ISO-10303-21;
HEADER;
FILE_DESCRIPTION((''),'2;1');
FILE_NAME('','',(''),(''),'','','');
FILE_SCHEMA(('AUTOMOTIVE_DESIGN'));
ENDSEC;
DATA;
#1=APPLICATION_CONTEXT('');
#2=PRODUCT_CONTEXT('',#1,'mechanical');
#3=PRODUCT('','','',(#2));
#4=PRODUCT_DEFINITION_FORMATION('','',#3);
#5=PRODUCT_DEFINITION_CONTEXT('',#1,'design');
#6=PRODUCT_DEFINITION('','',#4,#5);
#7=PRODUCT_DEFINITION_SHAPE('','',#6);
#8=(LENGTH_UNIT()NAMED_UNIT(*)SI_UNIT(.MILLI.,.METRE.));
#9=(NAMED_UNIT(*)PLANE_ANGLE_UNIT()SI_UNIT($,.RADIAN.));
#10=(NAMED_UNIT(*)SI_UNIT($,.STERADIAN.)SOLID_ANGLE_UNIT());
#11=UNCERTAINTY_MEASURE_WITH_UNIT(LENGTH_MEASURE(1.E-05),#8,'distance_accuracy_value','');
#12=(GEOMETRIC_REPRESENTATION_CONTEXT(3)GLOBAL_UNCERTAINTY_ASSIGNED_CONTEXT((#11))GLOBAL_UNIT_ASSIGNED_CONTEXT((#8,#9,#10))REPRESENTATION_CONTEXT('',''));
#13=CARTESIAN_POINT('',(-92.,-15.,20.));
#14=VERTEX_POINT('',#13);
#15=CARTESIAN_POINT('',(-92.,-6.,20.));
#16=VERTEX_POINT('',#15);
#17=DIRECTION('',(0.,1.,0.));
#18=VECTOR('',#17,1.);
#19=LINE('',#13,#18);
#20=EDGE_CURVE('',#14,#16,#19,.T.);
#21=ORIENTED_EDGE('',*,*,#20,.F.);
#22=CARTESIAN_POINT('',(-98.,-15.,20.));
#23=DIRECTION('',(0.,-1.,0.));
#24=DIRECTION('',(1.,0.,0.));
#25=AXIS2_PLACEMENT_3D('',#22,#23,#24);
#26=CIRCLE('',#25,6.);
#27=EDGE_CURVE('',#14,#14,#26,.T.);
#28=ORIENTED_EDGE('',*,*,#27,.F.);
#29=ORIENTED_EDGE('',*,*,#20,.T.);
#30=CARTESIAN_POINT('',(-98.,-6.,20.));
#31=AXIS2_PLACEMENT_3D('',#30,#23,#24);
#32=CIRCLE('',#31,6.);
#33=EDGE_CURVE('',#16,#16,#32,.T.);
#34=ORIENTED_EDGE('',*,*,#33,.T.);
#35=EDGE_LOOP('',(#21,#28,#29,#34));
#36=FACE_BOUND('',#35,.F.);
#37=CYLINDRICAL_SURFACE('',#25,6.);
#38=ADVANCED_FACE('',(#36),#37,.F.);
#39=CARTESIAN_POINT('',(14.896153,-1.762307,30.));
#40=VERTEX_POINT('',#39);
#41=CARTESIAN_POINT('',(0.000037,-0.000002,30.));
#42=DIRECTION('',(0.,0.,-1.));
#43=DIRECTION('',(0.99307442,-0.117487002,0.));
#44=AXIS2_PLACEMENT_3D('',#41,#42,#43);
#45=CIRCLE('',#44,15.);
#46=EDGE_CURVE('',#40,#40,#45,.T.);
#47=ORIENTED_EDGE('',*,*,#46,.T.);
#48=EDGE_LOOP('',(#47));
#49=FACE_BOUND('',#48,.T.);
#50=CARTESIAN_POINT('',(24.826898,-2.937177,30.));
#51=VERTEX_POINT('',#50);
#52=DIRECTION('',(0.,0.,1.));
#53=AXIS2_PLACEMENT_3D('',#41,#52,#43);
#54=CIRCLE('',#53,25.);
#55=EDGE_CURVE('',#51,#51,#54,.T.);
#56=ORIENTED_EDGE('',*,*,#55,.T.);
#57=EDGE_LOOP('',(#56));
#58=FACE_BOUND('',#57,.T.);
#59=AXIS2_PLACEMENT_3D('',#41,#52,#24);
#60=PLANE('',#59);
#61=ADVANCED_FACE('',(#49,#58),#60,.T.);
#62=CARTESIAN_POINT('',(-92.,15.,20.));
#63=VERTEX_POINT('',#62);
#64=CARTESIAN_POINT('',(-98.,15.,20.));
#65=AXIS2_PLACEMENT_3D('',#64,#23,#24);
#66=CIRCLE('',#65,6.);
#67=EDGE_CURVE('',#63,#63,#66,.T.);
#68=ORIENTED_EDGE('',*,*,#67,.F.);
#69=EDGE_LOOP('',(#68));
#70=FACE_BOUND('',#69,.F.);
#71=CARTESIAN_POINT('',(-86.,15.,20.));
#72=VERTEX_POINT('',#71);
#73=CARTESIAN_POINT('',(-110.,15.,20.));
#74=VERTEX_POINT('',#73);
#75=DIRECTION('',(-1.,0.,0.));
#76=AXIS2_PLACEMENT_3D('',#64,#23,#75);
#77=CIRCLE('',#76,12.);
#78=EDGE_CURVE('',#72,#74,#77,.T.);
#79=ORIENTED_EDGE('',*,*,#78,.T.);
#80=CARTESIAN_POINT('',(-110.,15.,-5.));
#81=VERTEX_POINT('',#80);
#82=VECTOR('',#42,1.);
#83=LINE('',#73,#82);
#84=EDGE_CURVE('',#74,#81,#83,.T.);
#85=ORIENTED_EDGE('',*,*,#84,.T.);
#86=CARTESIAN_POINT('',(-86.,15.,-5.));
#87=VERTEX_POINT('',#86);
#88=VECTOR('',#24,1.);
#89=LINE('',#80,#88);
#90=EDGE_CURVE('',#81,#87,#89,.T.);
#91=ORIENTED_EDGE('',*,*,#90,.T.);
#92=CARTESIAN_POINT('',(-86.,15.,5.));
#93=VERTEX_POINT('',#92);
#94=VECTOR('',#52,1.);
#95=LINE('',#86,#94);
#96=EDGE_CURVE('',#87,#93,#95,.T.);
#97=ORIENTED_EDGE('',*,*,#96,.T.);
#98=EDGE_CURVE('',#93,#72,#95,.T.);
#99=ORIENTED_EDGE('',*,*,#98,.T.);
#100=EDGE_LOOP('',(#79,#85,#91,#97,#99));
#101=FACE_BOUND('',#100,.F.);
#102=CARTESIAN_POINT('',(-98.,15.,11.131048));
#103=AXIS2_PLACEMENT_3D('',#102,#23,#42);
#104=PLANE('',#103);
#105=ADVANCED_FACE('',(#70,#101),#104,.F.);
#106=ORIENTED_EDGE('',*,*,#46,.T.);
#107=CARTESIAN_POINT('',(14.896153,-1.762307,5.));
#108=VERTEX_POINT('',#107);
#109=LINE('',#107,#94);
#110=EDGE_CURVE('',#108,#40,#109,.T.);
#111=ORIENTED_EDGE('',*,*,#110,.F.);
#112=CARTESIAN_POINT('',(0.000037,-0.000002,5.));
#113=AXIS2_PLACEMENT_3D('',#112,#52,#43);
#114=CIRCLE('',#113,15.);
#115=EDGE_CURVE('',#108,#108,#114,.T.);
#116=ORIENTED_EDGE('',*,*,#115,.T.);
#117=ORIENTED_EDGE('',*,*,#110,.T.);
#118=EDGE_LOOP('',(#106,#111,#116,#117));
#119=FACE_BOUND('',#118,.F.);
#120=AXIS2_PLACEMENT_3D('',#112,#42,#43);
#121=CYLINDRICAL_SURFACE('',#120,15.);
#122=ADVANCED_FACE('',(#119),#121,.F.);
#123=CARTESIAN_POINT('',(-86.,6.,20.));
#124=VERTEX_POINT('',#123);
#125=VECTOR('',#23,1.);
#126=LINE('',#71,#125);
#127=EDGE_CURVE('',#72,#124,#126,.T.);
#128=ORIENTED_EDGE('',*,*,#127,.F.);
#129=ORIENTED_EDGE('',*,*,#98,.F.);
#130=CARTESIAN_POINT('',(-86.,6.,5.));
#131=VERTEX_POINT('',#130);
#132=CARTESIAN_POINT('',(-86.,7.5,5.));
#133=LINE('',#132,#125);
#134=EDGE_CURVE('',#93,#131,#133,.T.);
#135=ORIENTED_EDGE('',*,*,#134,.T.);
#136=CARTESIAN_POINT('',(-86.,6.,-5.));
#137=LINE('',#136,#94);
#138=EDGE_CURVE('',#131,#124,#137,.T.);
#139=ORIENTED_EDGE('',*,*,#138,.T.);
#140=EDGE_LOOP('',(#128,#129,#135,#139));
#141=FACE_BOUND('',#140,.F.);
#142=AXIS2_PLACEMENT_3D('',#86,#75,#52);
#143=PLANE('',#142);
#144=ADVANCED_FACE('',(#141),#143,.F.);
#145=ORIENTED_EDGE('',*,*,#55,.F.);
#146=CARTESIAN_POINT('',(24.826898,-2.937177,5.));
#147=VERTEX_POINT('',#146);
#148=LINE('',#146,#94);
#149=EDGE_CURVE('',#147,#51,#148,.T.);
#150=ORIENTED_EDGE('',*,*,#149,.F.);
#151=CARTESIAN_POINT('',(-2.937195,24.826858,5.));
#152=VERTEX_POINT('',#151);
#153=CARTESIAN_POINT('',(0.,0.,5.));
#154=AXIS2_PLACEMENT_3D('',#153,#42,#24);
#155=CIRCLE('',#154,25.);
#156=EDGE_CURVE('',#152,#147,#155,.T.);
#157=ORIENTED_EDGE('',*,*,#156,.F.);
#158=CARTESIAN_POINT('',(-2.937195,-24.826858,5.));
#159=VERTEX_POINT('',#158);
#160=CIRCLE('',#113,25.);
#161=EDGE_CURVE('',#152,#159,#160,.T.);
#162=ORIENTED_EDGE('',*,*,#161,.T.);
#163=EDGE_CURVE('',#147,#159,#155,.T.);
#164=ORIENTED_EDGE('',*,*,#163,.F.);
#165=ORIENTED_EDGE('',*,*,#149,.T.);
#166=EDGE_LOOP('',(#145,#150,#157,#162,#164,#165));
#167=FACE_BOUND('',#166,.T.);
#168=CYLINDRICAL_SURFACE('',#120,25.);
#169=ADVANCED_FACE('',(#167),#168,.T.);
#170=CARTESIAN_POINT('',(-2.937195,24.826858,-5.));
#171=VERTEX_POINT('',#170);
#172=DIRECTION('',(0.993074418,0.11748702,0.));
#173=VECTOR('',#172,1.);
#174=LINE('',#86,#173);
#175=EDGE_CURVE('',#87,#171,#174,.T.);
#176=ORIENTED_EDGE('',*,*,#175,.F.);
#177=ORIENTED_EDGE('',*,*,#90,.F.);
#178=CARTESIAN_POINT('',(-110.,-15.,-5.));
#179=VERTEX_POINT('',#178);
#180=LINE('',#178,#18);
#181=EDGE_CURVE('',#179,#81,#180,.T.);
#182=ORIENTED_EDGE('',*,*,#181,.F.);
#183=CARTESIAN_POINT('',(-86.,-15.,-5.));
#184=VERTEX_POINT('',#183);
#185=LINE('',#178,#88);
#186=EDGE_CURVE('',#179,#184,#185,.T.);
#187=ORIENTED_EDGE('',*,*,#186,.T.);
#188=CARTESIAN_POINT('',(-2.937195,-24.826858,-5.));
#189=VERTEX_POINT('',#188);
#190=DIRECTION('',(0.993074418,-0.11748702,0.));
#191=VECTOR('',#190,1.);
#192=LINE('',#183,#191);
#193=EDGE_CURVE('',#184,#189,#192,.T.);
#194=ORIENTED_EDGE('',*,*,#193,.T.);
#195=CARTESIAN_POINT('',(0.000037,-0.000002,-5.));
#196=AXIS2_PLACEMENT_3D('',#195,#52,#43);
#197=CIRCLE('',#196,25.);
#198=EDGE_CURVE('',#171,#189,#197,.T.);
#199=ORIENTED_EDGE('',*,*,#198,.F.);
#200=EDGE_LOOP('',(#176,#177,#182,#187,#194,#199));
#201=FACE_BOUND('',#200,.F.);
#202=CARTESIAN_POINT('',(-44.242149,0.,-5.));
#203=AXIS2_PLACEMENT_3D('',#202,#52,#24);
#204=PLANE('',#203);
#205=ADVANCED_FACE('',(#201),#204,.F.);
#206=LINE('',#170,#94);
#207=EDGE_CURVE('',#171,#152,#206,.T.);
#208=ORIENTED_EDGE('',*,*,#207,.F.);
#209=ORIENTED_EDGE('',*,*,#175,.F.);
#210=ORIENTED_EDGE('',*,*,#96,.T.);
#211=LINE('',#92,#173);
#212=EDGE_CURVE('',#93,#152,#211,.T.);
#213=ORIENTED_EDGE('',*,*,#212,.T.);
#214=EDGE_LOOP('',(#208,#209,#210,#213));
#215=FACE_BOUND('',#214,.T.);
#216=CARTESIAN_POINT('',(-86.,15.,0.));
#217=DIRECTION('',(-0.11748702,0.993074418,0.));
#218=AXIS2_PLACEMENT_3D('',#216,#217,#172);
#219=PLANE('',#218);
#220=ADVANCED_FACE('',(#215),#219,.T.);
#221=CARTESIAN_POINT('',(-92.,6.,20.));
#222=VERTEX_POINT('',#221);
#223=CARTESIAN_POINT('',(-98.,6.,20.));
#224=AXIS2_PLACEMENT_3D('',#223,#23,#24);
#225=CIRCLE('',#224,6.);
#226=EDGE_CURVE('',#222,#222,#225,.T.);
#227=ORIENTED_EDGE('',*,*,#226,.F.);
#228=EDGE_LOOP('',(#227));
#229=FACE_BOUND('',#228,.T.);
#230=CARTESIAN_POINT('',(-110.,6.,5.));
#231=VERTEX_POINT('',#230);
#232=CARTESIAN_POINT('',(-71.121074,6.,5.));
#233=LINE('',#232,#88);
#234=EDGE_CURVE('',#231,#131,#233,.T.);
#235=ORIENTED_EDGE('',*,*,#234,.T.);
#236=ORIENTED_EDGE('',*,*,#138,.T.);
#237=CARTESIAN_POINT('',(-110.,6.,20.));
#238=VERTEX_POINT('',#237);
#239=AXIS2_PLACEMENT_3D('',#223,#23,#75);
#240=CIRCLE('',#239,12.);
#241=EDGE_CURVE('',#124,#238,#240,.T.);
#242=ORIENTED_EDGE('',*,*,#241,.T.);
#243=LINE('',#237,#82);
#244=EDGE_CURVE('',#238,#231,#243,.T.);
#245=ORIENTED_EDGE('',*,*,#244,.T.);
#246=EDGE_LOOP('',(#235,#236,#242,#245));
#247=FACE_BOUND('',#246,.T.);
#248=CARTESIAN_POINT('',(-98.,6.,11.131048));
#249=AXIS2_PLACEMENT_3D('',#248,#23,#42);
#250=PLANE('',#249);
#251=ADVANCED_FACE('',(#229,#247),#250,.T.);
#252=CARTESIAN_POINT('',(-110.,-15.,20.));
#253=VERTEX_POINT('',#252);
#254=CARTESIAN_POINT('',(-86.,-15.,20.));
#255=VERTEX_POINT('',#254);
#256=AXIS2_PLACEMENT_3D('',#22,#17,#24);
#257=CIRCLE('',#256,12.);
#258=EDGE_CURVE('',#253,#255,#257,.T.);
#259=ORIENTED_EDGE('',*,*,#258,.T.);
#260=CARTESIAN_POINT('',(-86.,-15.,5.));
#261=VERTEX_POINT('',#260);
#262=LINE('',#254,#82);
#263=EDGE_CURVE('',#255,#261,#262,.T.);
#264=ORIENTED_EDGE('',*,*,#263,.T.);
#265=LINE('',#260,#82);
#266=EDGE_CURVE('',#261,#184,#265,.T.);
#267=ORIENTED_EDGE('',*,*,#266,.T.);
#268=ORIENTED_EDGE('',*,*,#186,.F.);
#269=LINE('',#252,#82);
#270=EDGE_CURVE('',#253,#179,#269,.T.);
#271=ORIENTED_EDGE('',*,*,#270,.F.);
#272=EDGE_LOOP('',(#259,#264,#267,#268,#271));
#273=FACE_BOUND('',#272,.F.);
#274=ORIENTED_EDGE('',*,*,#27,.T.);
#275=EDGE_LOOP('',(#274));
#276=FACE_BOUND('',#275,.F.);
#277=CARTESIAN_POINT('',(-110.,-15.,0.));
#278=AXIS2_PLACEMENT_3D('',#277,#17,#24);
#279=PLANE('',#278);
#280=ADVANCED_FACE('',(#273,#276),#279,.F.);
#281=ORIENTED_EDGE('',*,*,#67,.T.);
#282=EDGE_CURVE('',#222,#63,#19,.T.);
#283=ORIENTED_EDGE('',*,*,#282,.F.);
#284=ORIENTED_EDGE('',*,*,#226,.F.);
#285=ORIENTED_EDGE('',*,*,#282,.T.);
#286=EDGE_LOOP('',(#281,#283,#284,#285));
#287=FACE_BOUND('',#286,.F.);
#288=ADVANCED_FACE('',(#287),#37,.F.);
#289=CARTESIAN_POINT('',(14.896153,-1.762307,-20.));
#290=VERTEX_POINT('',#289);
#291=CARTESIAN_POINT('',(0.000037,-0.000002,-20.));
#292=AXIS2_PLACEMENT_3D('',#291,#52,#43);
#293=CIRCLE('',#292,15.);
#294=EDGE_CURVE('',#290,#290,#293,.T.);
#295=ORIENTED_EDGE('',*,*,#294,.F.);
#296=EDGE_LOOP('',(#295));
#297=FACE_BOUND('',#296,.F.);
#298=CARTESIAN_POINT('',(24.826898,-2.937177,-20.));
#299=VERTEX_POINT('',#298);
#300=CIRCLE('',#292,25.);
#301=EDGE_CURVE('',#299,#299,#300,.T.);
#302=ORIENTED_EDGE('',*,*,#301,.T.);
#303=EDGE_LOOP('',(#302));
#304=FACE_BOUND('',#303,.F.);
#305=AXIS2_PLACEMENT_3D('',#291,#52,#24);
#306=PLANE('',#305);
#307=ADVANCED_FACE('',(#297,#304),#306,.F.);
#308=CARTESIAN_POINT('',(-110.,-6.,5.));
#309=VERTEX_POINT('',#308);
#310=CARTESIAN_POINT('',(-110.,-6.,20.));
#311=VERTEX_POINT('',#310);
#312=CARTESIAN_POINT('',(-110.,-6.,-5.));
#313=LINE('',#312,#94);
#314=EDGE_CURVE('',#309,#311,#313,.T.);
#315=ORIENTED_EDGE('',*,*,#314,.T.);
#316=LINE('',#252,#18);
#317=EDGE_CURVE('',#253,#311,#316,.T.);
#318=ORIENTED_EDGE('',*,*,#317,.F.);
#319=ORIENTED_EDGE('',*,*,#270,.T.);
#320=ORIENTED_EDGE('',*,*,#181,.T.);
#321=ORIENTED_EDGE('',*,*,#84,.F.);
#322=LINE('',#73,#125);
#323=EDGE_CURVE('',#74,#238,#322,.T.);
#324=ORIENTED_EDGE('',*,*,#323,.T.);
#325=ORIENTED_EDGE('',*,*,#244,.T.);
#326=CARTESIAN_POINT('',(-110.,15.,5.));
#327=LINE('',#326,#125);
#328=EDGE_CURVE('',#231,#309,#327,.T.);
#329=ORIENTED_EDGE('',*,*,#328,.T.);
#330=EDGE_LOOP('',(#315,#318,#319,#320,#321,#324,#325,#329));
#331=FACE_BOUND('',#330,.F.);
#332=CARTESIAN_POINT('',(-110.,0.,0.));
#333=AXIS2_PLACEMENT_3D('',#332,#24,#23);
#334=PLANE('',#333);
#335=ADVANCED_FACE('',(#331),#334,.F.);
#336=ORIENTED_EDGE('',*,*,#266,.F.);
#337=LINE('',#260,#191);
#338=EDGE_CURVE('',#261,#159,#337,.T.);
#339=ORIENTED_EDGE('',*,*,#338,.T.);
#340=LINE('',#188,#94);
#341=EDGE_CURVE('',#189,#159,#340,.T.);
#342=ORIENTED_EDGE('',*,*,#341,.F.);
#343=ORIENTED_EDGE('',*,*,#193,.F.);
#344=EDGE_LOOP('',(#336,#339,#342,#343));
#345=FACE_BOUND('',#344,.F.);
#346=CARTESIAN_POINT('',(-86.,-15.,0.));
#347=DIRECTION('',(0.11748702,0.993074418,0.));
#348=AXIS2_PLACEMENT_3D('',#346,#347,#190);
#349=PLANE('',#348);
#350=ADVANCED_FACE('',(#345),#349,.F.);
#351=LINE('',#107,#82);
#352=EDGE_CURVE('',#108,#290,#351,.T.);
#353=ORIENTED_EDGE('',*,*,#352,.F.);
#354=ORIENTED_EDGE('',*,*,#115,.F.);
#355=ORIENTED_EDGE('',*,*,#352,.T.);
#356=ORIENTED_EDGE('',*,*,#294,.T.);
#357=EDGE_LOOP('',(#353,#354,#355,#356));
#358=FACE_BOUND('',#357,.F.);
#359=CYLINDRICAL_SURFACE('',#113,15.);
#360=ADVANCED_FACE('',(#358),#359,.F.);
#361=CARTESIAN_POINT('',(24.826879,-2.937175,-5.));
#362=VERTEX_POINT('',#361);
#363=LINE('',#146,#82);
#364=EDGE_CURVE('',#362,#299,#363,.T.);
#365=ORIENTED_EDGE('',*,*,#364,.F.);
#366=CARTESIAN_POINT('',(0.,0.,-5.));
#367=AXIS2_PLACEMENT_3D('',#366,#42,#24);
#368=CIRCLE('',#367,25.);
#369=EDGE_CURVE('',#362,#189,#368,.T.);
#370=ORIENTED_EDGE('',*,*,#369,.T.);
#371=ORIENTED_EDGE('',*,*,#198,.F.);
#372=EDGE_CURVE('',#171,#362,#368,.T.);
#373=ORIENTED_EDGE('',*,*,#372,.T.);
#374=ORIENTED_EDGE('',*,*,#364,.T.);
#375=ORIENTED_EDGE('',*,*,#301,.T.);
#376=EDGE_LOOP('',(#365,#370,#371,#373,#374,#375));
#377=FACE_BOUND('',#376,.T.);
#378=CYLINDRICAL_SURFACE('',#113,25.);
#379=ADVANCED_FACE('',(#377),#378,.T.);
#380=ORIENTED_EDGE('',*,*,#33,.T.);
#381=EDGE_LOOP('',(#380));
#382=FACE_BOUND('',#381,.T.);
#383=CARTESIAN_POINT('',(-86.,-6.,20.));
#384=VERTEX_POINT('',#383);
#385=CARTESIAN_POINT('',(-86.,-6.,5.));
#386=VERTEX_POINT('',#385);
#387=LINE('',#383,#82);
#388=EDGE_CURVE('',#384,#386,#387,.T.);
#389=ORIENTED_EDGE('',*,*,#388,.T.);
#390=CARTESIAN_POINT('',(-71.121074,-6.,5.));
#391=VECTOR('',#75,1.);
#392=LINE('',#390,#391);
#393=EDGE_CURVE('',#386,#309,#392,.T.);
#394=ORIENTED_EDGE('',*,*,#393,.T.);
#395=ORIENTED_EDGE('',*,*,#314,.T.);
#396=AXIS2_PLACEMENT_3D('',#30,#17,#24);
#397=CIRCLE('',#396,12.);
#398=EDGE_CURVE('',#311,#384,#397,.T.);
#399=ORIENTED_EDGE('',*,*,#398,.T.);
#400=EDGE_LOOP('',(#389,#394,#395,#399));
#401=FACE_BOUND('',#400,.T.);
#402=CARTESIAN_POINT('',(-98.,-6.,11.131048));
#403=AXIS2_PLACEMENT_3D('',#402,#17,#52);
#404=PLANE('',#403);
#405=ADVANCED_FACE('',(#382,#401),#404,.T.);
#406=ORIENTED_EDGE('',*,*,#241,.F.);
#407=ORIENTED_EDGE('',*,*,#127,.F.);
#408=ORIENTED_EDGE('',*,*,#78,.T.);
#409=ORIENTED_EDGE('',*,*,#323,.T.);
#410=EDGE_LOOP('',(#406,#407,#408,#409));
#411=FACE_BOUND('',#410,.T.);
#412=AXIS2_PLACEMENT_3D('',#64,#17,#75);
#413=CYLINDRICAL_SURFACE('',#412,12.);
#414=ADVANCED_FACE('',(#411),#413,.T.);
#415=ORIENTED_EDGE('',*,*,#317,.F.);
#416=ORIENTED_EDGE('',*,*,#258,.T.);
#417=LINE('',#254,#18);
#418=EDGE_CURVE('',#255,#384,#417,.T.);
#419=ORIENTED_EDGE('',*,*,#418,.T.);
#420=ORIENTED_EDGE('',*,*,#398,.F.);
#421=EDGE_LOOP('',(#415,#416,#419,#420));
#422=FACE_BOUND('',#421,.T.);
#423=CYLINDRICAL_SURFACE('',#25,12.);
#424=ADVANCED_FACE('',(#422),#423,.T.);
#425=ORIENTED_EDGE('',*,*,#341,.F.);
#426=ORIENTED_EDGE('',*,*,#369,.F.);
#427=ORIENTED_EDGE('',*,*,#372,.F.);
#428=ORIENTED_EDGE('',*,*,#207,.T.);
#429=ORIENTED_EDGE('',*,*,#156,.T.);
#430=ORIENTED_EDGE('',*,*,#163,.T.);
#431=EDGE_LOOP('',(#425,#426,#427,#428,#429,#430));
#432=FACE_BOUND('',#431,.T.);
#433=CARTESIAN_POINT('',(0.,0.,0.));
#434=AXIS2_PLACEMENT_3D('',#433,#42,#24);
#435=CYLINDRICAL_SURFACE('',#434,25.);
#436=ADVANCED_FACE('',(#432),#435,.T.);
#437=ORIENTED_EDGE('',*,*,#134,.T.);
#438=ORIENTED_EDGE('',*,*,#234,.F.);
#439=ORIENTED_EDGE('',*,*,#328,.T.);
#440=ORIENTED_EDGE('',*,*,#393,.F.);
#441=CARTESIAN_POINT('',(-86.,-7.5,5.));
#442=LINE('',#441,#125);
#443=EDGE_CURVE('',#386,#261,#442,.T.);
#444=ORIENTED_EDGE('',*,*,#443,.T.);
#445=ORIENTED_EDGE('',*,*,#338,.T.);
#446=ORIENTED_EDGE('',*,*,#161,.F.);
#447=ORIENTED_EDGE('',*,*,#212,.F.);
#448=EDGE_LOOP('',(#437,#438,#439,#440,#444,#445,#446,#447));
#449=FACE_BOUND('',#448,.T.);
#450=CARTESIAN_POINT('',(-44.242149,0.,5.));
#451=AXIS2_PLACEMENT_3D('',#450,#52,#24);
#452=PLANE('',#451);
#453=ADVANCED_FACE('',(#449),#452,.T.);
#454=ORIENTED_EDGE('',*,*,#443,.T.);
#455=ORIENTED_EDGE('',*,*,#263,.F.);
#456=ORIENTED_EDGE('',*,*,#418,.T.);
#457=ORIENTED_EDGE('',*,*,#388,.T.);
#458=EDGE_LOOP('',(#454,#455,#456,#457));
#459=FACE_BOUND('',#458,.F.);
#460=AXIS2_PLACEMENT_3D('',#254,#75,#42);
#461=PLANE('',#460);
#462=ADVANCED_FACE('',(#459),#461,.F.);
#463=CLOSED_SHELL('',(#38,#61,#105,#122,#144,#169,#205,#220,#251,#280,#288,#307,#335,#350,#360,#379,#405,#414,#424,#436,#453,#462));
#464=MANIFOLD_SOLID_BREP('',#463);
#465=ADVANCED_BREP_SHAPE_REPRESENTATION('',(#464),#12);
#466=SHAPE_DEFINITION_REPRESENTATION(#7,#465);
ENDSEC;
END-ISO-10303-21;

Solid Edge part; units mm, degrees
sketch "Sketch1" plane through (0, 0, 0) normal (0, 0, 1) x (1, 0, 0)
  line L0 (-86, -15) -> (-2.9372, -24.8269)
  line L1 (-86, 15) -> (-2.9372, 24.8269)
  line L2 (-110, 15) -> (-86, 15)
  line L3 (-110, 0) -> (-110, 15)
  line L4 (-110, 0) -> (-110, -15)
  line L5 (-110, -15) -> (-86, -15)
  arc A0 (-2.9372, 24.8269) -> (-2.9372, -24.8269) centre (0, 0) cw
extrude "Protrusion1" add sketch "Sketch1" along normal mid plane 10
sketch "Sketch2" plane through (-42.5, 0, 5) normal (0, 0, 1) x (0.9930744, -0.117487, 0)
  circle A0 centre (42.2057, 4.9932) radius 25
extrude "ExtrudedProtrusion_2" add sketch "Sketch2" along normal mid plane 50
sketch "Sketch3" plane through (-42.5, 0, 5) normal (0, 0, 1) x (0.9930744, -0.117487, 0)
  circle A0 centre (42.2057, 4.9932) radius 15
extrude "Cutout1" cut sketch "Sketch3" along normal through all and the other way through all
sketch "Sketch4" plane through (-98, -15, 0) normal (0, -1, 0) x (1, 0, 0)
  line L0 (12, 20) -> (12, -5)
  arc A0 (-12, 20) -> (12, 20) centre (0, 20) cw
  line L1 (-12, -5) -> (-12, 20)
extrude "ExtrudedProtrusion_3" add sketch "Sketch4" against normal blind 9 material side at (-85.95, -15, 7.5)
sketch "Sketch5" plane through (-98, 15, 0) normal (0, 1, 0) x (-1, 0, 0)
  line L0 (12, 20) -> (12, -5)
  arc A0 (-12, 20) -> (12, 20) centre (0, 20) cw
  line L1 (-12, -5) -> (-12, 20)
extrude "ExtrudedProtrusion_4" add sketch "Sketch5" against normal blind 9 material side at (-110.05, 15, 7.5)
sketch "Sketch6" plane through (-98, -15, 0) normal (0, -1, 0) x (1, 0, 0)
  circle A0 centre (0, 20) radius 6
extrude "Cutout2" cut sketch "Sketch6" against normal through all
